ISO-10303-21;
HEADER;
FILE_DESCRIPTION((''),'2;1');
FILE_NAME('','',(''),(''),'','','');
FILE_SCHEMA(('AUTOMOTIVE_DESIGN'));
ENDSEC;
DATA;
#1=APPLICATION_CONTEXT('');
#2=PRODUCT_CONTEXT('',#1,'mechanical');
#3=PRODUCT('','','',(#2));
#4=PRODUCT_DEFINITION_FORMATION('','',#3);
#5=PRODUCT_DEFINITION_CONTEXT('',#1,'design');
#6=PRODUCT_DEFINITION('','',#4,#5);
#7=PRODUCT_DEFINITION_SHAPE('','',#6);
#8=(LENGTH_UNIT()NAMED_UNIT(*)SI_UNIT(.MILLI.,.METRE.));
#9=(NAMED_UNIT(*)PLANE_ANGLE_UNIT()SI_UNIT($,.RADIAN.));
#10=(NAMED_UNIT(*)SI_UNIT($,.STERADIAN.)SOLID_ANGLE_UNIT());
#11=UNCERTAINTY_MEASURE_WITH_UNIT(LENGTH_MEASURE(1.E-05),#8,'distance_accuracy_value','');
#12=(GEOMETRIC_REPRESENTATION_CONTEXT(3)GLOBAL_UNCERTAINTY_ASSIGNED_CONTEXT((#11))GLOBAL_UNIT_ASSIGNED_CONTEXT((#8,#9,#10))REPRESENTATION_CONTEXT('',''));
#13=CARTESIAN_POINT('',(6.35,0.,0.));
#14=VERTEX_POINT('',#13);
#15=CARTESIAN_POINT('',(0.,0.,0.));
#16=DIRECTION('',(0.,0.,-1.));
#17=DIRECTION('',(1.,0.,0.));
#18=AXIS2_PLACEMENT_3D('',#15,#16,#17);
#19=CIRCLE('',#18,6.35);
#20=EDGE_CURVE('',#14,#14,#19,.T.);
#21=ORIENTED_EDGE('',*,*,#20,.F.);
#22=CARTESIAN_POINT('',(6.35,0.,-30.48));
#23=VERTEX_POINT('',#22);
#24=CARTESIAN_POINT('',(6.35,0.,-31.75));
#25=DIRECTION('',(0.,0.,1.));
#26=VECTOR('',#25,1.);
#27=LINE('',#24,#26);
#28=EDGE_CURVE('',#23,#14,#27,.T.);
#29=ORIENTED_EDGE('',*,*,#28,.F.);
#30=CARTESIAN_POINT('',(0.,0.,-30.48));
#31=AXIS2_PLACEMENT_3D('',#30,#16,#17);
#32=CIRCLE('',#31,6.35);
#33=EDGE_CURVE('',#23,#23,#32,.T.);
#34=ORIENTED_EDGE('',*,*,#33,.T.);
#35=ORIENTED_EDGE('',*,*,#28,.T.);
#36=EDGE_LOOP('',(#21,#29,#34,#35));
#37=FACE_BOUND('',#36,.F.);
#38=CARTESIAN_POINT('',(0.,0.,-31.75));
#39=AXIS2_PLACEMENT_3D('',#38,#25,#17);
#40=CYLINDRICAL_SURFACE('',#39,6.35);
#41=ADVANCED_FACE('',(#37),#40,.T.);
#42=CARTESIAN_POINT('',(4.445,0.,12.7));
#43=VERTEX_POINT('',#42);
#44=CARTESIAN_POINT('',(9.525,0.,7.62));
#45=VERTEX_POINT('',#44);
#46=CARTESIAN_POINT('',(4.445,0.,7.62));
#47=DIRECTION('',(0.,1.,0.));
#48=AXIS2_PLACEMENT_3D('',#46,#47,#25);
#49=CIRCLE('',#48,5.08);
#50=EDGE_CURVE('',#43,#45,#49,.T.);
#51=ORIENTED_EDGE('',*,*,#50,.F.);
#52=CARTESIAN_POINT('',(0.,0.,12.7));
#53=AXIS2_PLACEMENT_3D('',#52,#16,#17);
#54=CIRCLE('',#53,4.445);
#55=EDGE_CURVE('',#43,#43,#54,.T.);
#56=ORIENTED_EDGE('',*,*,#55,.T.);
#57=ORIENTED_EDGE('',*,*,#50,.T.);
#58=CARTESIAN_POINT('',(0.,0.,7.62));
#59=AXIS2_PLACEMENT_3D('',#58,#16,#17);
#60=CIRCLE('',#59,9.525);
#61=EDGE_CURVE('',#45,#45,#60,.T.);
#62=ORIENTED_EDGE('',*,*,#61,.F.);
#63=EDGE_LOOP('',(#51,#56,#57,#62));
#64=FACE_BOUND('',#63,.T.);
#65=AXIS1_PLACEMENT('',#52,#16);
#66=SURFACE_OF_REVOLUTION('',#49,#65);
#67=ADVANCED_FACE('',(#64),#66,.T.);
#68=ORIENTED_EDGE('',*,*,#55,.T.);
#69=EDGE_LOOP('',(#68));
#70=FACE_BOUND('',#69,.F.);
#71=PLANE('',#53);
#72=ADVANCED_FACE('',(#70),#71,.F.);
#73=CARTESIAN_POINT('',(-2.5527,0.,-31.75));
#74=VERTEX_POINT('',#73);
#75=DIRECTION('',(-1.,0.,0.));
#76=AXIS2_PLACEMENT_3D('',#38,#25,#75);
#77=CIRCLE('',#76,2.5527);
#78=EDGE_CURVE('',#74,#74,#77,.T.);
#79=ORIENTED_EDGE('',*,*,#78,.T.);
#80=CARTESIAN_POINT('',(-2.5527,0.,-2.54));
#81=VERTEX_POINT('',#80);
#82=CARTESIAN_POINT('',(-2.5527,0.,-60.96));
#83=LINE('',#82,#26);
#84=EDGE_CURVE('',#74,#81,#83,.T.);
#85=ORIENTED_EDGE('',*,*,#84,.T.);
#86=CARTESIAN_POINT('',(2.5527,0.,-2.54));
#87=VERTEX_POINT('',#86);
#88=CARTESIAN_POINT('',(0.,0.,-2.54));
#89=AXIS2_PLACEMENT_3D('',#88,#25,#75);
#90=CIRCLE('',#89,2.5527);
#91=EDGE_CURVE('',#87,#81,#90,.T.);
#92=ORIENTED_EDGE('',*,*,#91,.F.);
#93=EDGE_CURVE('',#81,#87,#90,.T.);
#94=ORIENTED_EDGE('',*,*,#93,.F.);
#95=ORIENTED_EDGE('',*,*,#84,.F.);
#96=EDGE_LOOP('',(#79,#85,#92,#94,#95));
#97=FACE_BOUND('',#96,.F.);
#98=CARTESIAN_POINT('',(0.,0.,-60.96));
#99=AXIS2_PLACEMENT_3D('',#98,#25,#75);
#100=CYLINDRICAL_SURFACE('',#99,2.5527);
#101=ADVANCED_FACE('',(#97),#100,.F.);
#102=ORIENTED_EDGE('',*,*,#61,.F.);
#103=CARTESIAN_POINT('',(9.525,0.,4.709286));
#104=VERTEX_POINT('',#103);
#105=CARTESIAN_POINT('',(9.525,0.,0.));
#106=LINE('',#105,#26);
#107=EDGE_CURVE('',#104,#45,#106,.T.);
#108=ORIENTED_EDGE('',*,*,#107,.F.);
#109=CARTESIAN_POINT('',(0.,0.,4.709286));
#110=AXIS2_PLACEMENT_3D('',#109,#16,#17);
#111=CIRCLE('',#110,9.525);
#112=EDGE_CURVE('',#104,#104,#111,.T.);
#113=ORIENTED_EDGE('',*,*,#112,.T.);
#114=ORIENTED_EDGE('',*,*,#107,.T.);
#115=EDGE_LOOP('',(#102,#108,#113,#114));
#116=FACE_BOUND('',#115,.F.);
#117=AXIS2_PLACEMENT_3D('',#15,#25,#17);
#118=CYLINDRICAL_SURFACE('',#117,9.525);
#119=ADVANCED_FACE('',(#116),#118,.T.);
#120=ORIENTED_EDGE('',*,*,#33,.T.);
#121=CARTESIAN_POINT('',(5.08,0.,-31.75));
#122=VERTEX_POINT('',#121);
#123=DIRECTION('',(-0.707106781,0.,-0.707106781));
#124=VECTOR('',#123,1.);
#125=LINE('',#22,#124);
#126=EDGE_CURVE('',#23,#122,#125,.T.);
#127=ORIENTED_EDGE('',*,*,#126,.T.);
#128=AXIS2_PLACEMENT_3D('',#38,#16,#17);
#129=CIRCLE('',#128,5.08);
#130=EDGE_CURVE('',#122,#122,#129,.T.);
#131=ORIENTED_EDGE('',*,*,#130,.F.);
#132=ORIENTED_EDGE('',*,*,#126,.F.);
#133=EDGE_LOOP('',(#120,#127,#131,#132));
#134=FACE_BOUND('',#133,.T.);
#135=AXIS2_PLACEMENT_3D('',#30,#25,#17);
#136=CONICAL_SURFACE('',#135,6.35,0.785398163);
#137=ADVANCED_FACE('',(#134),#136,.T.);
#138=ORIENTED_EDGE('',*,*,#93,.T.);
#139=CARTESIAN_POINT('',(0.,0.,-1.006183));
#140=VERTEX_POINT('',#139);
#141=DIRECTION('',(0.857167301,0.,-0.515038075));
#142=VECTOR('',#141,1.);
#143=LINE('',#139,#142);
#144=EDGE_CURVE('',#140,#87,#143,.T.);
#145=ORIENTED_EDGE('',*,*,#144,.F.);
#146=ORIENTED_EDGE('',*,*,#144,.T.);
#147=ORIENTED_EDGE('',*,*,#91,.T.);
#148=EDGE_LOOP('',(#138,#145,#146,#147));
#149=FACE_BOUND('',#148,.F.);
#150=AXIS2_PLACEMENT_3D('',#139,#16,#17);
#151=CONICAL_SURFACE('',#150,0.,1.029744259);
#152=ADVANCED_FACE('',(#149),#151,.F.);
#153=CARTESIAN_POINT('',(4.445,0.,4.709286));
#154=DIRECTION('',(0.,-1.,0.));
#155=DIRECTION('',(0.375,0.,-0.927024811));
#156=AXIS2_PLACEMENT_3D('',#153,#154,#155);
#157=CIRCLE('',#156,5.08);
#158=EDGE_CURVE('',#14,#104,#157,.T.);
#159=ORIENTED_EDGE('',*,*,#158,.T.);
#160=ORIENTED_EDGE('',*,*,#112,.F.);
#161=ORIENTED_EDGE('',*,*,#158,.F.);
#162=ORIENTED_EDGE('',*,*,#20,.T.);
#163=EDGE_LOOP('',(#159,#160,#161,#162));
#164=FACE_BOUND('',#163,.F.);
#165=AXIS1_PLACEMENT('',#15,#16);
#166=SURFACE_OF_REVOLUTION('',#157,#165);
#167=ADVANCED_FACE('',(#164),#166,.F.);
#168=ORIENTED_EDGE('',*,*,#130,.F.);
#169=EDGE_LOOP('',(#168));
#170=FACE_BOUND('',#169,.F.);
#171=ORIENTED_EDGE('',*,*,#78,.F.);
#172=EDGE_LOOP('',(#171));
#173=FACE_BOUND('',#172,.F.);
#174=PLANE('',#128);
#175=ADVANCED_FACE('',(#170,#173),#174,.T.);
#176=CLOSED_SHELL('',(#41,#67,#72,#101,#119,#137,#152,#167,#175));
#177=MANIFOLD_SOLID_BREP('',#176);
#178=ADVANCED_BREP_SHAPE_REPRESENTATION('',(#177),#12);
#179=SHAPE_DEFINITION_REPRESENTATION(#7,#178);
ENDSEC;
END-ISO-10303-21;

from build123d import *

# Parameters (mm, degrees)
F3_SIZE  = 1.27
F5_D     = 5.1054
F5_DEPTH = 29.21
F5_TIP   = 1.5338169022


# Not quite as in the source:
# - a fillet or chamfer that OpenCascade refuses, or shapes differently, is made with other operations: its cross-section is extruded or revolved along the edge and cut away or added


with BuildPart() as f1:
    # F0 (on Front) → F1 (revolve)
    with BuildSketch(Plane.XZ):
        Polygon((9.525, 12.7), (0, 12.7), (0, -31.75), (6.35, -31.75), (6.35, 0), (9.525, 0), align=None)
    revolve(axis=Axis((0, 0, -3.4719856316), (0, 0, -1)))

    # F2: fillet of radius 5.08 on 2 edges, made by hand

    # F2_s1 → F2_t2 (revolve, cut)
    with BuildSketch(Plane.XZ):
        with BuildLine():
            ThreePointArc((4.445, 12.7), (8.0371024484, 11.2121024484), (9.525, 7.62))
            Line((9.525, 7.62), (9.525, 12.7))
            Line((9.525, 12.7), (4.445, 12.7))
        make_face()
    revolve(axis=Axis((0, 0, 12.7), (0, 0, -1)), mode=Mode.SUBTRACT)

    # F2_s3 → F2_t4 (revolve, cut)
    with BuildSketch(Plane.XZ):
        with BuildLine():
            ThreePointArc((6.35, 0), (8.6571134838, 1.8694797079), (9.525, 4.7092860393))
            Line((9.525, 4.7092860393), (9.525, 0))
            Line((9.525, 0), (6.35, 0))
        make_face()
    revolve(axis=Axis((0, 0, 0), (0, 0, -1)), mode=Mode.SUBTRACT)

    # F3
    f3_edges = [f1.edges().sort_by_distance(p)[0] for p in [
        (-6.35, 0, -31.75),
    ]]
    chamfer(f3_edges, length=F3_SIZE)

    # F5
    with Locations(Plane(origin=(0, 0, -31.75), x_dir=(1, 0, 0), z_dir=(0, 0, -1))):
        with Locations((0, 0)):
            Hole(F5_D / 2, depth=F5_DEPTH)
            with Locations((0, 0, -(F5_DEPTH + F5_TIP / 2))):  # 118° drill point
                Cone(0, F5_D / 2, F5_TIP, mode=Mode.SUBTRACT)


solid = f1.part
